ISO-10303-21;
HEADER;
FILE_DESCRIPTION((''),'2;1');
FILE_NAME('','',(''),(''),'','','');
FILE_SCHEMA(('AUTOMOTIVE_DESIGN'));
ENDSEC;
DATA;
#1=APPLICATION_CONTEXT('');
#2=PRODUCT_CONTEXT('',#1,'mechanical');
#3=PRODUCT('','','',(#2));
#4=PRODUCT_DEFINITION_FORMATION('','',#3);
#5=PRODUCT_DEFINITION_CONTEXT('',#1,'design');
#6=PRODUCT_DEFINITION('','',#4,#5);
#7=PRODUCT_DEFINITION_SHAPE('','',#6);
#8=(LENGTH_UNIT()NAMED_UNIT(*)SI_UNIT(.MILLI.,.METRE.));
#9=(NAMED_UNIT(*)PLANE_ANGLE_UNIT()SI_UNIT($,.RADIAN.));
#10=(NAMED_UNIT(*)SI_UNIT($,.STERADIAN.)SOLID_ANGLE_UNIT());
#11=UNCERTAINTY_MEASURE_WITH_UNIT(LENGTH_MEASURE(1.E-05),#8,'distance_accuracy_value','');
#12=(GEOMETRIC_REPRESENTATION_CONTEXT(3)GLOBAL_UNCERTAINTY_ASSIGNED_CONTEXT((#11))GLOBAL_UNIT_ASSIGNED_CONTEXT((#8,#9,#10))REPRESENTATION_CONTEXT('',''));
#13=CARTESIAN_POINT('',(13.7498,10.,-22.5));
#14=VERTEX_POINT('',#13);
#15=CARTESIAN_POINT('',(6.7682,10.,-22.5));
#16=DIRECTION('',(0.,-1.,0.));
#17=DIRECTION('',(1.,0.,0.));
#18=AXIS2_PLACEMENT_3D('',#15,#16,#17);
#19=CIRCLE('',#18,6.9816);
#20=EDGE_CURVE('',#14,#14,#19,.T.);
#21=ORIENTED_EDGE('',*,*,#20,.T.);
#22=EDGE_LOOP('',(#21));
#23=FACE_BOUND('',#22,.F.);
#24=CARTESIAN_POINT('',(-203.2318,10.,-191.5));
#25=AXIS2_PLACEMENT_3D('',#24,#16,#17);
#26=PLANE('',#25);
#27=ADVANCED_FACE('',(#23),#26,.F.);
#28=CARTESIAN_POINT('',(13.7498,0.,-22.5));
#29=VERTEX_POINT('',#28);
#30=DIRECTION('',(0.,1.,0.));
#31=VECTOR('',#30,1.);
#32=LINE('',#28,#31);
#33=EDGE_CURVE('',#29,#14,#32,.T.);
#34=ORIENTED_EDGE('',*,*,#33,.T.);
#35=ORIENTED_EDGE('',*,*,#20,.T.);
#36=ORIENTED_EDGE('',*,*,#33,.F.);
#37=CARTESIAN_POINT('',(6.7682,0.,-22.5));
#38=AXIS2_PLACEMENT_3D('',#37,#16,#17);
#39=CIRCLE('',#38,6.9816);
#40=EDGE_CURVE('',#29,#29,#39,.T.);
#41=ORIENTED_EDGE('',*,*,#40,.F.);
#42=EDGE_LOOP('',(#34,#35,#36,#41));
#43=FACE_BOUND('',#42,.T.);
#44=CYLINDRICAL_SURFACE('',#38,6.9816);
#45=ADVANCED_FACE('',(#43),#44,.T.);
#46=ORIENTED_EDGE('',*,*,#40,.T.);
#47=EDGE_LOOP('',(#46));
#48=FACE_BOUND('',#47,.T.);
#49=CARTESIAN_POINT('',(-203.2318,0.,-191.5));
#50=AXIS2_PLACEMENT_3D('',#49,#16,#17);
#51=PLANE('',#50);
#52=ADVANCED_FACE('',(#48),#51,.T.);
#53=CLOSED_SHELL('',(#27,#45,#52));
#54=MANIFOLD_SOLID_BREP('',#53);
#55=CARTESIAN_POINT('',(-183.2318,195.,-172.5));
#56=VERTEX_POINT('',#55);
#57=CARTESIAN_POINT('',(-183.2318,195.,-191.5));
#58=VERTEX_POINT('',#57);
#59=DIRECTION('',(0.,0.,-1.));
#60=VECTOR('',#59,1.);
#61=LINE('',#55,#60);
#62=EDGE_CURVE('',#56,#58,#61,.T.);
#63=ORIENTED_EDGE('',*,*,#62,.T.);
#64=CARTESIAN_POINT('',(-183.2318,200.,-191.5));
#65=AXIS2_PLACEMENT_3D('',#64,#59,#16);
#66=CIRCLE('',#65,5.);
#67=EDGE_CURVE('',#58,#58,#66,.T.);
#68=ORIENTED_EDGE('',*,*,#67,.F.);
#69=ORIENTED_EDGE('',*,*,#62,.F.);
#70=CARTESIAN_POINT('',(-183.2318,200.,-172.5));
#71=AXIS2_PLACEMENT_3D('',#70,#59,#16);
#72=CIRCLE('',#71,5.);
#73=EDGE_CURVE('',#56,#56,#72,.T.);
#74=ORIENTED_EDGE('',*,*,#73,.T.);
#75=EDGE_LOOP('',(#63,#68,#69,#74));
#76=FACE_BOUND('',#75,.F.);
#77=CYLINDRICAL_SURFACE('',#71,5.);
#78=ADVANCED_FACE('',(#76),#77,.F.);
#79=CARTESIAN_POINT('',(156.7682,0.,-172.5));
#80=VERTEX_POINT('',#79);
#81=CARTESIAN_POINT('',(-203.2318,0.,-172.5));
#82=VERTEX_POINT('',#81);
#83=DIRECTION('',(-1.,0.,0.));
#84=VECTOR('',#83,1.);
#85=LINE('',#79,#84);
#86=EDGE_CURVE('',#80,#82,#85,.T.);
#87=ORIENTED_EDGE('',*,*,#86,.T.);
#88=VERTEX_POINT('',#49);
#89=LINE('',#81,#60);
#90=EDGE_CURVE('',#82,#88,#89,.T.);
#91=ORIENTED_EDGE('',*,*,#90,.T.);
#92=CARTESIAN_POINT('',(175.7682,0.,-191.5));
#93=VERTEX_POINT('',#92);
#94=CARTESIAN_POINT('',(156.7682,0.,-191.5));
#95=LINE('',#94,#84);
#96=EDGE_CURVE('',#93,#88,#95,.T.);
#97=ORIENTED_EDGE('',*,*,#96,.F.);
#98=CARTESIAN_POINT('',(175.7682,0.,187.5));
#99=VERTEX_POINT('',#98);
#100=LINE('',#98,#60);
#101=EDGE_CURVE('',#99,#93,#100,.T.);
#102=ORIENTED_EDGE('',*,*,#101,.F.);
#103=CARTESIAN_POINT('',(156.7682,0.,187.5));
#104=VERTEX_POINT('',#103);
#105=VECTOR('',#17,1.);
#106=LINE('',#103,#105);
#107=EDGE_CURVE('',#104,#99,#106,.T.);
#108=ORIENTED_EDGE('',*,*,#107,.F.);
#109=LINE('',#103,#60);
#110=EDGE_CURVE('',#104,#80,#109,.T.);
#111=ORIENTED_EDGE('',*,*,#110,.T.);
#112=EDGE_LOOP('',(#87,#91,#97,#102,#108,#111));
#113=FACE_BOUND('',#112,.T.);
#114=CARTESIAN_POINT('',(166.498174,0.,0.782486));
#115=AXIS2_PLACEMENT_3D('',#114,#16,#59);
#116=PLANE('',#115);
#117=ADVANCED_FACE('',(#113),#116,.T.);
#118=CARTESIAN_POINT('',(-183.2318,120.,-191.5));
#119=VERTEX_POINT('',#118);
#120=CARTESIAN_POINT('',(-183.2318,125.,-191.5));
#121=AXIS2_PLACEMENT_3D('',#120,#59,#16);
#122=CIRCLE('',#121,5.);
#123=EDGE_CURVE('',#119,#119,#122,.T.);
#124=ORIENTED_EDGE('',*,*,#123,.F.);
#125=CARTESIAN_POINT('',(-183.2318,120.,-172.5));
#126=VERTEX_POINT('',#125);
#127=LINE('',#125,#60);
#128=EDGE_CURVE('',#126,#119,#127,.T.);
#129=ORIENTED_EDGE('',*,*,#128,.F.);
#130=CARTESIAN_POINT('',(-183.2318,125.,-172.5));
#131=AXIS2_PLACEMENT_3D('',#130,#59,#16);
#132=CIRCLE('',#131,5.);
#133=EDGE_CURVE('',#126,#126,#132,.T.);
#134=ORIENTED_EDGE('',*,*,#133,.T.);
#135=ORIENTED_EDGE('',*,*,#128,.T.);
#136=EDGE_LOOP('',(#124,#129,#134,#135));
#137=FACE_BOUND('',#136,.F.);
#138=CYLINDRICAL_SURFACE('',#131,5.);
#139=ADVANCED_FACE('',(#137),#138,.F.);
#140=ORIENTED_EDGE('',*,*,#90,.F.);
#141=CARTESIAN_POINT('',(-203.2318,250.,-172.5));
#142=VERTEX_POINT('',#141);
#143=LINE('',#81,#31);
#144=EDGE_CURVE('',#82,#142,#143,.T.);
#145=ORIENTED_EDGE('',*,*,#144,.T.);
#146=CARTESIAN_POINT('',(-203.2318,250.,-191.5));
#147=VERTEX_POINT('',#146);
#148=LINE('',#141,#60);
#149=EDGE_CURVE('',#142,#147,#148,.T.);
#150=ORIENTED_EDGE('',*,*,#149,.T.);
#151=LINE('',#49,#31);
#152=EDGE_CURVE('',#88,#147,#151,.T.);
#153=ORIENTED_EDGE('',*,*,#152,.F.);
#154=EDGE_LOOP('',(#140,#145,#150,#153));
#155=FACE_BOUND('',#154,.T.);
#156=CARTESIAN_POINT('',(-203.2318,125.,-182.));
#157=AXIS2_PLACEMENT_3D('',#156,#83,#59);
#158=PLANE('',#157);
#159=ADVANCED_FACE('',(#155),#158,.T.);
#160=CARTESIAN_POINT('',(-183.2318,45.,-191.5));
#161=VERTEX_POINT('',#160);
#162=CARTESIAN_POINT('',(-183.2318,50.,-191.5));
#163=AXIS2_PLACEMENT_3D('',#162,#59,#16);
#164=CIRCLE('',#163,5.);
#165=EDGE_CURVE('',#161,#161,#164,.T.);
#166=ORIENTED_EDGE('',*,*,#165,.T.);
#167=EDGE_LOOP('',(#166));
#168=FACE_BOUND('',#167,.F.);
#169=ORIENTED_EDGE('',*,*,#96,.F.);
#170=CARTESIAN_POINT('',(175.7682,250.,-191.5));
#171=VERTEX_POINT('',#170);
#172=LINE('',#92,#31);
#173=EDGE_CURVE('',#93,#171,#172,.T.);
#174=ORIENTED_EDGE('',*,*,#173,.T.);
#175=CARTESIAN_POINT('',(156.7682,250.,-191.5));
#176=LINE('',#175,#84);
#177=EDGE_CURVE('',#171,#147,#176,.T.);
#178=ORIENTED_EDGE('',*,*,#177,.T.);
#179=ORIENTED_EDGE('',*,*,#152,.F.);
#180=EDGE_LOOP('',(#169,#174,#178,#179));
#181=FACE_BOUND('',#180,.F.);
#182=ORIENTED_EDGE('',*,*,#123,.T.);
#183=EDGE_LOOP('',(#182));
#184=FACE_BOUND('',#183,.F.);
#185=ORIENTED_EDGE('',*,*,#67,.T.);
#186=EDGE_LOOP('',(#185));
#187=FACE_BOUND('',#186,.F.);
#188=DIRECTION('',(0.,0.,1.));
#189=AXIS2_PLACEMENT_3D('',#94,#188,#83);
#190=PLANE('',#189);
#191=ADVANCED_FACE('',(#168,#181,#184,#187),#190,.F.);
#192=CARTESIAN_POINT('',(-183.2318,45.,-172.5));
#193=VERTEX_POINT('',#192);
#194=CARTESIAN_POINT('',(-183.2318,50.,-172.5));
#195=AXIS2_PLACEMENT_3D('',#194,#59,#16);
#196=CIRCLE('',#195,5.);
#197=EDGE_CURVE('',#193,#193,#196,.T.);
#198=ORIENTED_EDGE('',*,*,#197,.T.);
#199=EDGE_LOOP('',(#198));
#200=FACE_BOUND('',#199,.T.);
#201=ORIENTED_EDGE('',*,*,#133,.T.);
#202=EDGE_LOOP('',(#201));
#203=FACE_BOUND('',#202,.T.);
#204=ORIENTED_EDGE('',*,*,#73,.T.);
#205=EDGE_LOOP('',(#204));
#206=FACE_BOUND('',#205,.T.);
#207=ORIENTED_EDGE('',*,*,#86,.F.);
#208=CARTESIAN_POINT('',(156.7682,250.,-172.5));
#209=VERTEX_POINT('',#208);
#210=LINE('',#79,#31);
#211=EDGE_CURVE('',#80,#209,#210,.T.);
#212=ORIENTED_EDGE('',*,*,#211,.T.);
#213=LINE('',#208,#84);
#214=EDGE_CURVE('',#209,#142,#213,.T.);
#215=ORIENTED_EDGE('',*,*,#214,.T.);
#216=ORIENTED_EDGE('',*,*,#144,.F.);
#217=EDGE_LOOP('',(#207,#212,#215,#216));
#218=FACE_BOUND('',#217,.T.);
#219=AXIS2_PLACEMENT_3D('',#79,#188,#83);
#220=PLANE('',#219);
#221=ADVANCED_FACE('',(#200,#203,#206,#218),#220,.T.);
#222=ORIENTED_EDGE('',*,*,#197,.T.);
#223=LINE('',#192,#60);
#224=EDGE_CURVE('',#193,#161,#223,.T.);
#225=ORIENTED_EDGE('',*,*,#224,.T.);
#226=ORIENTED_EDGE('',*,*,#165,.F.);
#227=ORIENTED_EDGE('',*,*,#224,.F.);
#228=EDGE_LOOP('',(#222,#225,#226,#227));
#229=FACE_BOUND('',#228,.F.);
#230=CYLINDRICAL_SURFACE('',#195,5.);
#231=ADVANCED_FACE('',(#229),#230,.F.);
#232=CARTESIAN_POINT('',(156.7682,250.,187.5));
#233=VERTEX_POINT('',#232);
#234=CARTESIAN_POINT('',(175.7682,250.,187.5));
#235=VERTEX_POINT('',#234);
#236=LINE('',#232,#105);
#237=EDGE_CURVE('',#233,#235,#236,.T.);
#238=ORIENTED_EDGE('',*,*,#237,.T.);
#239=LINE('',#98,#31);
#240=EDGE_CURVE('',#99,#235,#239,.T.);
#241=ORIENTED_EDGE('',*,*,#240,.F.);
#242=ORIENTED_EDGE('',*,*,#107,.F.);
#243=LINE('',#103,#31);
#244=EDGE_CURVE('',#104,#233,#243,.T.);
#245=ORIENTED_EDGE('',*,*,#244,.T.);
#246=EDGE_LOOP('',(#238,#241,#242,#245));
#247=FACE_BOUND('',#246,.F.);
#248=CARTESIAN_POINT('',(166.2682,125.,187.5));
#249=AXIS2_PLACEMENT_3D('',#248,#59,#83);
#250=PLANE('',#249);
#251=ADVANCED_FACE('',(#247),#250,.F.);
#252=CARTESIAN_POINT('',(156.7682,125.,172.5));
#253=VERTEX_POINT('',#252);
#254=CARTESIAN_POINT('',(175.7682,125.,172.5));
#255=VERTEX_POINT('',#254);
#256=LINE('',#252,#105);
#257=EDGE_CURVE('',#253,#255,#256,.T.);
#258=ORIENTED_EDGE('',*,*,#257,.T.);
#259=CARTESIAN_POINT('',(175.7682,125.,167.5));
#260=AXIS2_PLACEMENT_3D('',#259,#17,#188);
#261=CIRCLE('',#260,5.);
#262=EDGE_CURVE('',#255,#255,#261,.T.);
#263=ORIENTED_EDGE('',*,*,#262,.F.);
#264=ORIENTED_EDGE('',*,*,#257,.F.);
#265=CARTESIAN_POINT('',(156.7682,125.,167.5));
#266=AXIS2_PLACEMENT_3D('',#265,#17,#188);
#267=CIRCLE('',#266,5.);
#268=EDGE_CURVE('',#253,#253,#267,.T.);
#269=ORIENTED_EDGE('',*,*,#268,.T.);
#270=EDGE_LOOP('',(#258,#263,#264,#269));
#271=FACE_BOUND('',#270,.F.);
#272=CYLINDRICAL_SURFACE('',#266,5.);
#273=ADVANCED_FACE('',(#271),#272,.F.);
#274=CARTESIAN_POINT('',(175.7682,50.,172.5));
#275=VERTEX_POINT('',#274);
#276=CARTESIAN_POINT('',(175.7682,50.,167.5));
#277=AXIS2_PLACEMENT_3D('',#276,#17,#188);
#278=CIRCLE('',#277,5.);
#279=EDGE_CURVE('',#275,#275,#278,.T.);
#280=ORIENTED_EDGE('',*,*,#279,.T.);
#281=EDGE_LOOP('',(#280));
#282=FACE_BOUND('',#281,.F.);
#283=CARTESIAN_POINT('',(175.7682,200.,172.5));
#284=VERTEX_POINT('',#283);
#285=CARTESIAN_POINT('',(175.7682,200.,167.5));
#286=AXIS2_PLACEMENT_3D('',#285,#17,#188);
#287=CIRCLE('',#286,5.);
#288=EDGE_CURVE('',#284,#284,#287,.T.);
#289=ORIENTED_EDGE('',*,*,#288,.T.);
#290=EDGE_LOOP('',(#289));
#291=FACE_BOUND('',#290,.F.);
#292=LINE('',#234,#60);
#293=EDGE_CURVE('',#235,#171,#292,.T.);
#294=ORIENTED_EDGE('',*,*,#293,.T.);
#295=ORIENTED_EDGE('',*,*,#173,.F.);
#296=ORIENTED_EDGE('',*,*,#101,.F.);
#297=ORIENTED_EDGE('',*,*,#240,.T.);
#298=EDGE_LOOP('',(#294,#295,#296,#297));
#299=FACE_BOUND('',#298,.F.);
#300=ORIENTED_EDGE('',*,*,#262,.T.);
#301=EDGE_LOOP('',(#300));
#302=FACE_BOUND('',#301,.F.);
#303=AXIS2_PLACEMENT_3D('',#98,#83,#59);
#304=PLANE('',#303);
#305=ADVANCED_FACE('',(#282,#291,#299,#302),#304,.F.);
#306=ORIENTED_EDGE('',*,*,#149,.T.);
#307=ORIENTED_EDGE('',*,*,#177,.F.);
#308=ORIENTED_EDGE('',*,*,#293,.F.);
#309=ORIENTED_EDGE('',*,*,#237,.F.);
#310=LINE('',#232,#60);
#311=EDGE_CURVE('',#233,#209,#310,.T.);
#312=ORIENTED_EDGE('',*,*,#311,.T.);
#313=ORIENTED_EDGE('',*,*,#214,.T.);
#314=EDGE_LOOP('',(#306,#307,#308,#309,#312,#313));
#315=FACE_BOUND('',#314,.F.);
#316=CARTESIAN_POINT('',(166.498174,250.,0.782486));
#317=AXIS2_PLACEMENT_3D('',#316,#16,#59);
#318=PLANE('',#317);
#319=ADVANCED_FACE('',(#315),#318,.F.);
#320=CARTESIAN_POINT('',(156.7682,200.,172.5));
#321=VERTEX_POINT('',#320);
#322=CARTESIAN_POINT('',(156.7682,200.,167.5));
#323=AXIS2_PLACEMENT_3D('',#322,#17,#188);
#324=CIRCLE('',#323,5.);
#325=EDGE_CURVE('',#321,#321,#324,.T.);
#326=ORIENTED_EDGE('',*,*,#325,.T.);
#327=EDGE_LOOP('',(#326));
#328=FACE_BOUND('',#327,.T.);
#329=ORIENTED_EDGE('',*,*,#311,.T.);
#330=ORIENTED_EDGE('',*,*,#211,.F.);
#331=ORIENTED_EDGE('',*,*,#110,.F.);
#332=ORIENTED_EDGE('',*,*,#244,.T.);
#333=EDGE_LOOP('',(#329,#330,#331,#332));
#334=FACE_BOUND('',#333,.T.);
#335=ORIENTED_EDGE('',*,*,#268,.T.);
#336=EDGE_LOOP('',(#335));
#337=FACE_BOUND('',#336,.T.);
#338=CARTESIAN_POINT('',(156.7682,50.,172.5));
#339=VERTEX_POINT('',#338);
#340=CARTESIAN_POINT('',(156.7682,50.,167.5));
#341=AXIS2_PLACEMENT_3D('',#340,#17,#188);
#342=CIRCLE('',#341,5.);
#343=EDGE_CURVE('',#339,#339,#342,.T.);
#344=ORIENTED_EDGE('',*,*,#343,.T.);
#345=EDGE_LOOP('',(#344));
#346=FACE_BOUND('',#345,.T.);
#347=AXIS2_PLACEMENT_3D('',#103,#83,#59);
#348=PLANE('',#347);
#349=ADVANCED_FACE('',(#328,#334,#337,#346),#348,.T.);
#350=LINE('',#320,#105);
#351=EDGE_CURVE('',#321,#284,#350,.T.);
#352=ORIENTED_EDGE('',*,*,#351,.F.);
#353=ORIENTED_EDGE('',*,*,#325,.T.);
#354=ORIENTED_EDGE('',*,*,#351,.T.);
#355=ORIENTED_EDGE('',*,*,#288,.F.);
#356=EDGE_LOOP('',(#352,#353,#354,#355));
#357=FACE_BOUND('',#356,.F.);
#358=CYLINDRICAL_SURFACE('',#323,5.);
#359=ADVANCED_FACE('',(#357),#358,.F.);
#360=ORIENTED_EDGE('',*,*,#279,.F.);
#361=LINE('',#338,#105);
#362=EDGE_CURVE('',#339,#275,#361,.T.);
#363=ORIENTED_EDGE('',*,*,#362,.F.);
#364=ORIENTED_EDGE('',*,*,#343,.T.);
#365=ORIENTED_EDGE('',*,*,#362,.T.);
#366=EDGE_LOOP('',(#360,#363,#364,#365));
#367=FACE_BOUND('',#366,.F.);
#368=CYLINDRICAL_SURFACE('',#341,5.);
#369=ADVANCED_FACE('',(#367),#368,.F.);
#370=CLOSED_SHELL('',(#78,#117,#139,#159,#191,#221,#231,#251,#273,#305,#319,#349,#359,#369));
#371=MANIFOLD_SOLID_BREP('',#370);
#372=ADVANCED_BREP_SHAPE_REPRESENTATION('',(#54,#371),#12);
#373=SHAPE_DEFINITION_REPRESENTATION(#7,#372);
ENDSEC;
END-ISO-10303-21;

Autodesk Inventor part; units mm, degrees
ref_plane "YZ Plane" through (0, 0, 0) normal (1, 0, 0) x (0, 1, 0)
ref_plane "XZ Plane" through (0, 0, 0) normal (0, 1, 0) x (-1, 0, 0)
ref_plane "XY Plane" through (0, 0, 0) normal (0, 0, 1) x (1, 0, 0)
sketch "Sketch1" plane through (0, 0, 0) normal (0, 1, 0) x (-1, 0, 0)
  line L0 (-156.7682, 187.5) -> (-156.7682, -172.5)
  line L1 (-156.7682, 187.5) -> (203.2318, 187.5) construction
  line L2 (-156.7682, -172.5) -> (203.2318, -172.5)
  line L3 (-149.2682, 187.5) -> (-119.2682, 187.5) construction
  point P0 (0, 0)
  dimension "d0" = 360
  dimension "d1" = 90
  dimension "d2" = 360
surface extrude "ExtrusionSrf1" sketch "Sketch1" along normal blind 250 shown yes curves L0 L2
thicken "Thicken1" operation new thickness 19 both sides no extend neighbours no toward (1, 0, 0) faces at (156.7682, 83.3333, 67.5) (36.7682, 83.3333, -172.5)
hole "Hole1" at (-183.2318, 200, -172.5) direction (0, 0, -1) diameter 10 end through all
hole "Hole2" at (-183.2318, 125, -172.5) direction (0, 0, -1) diameter 10 end through all
hole "Hole3" at (-183.2318, 50, -172.5) direction (0, 0, -1) diameter 10 end through all
hole "Hole4" at (156.7682, 200, 167.5) direction (1, 0, 0) diameter 10 end through all
hole "Hole5" at (156.7682, 125, 167.5) direction (1, 0, 0) diameter 10 end through all
hole "Hole6" at (156.7682, 50, 167.5) direction (1, 0, 0) diameter 10 end through all
sketch "Sketch3" plane through (-203.2318, 0, -191.5) normal (0, -1, 0) x (1, 0, 0)
  line L0 (360, 379) -> (360, 19) projected
  line L1 (360, 19) -> (0, 19) projected
  circle A0 centre (210, 169) radius 6.9816
  point P0 (203.2318, 191.5)
  dimension "d75" = 150
  dimension "d76" = 150
extrude "Extrusion1" add sketch "Sketch3" against normal blind 10 separate body
properties part number "ConcreteFormwork" material "Wood (Birch)"
